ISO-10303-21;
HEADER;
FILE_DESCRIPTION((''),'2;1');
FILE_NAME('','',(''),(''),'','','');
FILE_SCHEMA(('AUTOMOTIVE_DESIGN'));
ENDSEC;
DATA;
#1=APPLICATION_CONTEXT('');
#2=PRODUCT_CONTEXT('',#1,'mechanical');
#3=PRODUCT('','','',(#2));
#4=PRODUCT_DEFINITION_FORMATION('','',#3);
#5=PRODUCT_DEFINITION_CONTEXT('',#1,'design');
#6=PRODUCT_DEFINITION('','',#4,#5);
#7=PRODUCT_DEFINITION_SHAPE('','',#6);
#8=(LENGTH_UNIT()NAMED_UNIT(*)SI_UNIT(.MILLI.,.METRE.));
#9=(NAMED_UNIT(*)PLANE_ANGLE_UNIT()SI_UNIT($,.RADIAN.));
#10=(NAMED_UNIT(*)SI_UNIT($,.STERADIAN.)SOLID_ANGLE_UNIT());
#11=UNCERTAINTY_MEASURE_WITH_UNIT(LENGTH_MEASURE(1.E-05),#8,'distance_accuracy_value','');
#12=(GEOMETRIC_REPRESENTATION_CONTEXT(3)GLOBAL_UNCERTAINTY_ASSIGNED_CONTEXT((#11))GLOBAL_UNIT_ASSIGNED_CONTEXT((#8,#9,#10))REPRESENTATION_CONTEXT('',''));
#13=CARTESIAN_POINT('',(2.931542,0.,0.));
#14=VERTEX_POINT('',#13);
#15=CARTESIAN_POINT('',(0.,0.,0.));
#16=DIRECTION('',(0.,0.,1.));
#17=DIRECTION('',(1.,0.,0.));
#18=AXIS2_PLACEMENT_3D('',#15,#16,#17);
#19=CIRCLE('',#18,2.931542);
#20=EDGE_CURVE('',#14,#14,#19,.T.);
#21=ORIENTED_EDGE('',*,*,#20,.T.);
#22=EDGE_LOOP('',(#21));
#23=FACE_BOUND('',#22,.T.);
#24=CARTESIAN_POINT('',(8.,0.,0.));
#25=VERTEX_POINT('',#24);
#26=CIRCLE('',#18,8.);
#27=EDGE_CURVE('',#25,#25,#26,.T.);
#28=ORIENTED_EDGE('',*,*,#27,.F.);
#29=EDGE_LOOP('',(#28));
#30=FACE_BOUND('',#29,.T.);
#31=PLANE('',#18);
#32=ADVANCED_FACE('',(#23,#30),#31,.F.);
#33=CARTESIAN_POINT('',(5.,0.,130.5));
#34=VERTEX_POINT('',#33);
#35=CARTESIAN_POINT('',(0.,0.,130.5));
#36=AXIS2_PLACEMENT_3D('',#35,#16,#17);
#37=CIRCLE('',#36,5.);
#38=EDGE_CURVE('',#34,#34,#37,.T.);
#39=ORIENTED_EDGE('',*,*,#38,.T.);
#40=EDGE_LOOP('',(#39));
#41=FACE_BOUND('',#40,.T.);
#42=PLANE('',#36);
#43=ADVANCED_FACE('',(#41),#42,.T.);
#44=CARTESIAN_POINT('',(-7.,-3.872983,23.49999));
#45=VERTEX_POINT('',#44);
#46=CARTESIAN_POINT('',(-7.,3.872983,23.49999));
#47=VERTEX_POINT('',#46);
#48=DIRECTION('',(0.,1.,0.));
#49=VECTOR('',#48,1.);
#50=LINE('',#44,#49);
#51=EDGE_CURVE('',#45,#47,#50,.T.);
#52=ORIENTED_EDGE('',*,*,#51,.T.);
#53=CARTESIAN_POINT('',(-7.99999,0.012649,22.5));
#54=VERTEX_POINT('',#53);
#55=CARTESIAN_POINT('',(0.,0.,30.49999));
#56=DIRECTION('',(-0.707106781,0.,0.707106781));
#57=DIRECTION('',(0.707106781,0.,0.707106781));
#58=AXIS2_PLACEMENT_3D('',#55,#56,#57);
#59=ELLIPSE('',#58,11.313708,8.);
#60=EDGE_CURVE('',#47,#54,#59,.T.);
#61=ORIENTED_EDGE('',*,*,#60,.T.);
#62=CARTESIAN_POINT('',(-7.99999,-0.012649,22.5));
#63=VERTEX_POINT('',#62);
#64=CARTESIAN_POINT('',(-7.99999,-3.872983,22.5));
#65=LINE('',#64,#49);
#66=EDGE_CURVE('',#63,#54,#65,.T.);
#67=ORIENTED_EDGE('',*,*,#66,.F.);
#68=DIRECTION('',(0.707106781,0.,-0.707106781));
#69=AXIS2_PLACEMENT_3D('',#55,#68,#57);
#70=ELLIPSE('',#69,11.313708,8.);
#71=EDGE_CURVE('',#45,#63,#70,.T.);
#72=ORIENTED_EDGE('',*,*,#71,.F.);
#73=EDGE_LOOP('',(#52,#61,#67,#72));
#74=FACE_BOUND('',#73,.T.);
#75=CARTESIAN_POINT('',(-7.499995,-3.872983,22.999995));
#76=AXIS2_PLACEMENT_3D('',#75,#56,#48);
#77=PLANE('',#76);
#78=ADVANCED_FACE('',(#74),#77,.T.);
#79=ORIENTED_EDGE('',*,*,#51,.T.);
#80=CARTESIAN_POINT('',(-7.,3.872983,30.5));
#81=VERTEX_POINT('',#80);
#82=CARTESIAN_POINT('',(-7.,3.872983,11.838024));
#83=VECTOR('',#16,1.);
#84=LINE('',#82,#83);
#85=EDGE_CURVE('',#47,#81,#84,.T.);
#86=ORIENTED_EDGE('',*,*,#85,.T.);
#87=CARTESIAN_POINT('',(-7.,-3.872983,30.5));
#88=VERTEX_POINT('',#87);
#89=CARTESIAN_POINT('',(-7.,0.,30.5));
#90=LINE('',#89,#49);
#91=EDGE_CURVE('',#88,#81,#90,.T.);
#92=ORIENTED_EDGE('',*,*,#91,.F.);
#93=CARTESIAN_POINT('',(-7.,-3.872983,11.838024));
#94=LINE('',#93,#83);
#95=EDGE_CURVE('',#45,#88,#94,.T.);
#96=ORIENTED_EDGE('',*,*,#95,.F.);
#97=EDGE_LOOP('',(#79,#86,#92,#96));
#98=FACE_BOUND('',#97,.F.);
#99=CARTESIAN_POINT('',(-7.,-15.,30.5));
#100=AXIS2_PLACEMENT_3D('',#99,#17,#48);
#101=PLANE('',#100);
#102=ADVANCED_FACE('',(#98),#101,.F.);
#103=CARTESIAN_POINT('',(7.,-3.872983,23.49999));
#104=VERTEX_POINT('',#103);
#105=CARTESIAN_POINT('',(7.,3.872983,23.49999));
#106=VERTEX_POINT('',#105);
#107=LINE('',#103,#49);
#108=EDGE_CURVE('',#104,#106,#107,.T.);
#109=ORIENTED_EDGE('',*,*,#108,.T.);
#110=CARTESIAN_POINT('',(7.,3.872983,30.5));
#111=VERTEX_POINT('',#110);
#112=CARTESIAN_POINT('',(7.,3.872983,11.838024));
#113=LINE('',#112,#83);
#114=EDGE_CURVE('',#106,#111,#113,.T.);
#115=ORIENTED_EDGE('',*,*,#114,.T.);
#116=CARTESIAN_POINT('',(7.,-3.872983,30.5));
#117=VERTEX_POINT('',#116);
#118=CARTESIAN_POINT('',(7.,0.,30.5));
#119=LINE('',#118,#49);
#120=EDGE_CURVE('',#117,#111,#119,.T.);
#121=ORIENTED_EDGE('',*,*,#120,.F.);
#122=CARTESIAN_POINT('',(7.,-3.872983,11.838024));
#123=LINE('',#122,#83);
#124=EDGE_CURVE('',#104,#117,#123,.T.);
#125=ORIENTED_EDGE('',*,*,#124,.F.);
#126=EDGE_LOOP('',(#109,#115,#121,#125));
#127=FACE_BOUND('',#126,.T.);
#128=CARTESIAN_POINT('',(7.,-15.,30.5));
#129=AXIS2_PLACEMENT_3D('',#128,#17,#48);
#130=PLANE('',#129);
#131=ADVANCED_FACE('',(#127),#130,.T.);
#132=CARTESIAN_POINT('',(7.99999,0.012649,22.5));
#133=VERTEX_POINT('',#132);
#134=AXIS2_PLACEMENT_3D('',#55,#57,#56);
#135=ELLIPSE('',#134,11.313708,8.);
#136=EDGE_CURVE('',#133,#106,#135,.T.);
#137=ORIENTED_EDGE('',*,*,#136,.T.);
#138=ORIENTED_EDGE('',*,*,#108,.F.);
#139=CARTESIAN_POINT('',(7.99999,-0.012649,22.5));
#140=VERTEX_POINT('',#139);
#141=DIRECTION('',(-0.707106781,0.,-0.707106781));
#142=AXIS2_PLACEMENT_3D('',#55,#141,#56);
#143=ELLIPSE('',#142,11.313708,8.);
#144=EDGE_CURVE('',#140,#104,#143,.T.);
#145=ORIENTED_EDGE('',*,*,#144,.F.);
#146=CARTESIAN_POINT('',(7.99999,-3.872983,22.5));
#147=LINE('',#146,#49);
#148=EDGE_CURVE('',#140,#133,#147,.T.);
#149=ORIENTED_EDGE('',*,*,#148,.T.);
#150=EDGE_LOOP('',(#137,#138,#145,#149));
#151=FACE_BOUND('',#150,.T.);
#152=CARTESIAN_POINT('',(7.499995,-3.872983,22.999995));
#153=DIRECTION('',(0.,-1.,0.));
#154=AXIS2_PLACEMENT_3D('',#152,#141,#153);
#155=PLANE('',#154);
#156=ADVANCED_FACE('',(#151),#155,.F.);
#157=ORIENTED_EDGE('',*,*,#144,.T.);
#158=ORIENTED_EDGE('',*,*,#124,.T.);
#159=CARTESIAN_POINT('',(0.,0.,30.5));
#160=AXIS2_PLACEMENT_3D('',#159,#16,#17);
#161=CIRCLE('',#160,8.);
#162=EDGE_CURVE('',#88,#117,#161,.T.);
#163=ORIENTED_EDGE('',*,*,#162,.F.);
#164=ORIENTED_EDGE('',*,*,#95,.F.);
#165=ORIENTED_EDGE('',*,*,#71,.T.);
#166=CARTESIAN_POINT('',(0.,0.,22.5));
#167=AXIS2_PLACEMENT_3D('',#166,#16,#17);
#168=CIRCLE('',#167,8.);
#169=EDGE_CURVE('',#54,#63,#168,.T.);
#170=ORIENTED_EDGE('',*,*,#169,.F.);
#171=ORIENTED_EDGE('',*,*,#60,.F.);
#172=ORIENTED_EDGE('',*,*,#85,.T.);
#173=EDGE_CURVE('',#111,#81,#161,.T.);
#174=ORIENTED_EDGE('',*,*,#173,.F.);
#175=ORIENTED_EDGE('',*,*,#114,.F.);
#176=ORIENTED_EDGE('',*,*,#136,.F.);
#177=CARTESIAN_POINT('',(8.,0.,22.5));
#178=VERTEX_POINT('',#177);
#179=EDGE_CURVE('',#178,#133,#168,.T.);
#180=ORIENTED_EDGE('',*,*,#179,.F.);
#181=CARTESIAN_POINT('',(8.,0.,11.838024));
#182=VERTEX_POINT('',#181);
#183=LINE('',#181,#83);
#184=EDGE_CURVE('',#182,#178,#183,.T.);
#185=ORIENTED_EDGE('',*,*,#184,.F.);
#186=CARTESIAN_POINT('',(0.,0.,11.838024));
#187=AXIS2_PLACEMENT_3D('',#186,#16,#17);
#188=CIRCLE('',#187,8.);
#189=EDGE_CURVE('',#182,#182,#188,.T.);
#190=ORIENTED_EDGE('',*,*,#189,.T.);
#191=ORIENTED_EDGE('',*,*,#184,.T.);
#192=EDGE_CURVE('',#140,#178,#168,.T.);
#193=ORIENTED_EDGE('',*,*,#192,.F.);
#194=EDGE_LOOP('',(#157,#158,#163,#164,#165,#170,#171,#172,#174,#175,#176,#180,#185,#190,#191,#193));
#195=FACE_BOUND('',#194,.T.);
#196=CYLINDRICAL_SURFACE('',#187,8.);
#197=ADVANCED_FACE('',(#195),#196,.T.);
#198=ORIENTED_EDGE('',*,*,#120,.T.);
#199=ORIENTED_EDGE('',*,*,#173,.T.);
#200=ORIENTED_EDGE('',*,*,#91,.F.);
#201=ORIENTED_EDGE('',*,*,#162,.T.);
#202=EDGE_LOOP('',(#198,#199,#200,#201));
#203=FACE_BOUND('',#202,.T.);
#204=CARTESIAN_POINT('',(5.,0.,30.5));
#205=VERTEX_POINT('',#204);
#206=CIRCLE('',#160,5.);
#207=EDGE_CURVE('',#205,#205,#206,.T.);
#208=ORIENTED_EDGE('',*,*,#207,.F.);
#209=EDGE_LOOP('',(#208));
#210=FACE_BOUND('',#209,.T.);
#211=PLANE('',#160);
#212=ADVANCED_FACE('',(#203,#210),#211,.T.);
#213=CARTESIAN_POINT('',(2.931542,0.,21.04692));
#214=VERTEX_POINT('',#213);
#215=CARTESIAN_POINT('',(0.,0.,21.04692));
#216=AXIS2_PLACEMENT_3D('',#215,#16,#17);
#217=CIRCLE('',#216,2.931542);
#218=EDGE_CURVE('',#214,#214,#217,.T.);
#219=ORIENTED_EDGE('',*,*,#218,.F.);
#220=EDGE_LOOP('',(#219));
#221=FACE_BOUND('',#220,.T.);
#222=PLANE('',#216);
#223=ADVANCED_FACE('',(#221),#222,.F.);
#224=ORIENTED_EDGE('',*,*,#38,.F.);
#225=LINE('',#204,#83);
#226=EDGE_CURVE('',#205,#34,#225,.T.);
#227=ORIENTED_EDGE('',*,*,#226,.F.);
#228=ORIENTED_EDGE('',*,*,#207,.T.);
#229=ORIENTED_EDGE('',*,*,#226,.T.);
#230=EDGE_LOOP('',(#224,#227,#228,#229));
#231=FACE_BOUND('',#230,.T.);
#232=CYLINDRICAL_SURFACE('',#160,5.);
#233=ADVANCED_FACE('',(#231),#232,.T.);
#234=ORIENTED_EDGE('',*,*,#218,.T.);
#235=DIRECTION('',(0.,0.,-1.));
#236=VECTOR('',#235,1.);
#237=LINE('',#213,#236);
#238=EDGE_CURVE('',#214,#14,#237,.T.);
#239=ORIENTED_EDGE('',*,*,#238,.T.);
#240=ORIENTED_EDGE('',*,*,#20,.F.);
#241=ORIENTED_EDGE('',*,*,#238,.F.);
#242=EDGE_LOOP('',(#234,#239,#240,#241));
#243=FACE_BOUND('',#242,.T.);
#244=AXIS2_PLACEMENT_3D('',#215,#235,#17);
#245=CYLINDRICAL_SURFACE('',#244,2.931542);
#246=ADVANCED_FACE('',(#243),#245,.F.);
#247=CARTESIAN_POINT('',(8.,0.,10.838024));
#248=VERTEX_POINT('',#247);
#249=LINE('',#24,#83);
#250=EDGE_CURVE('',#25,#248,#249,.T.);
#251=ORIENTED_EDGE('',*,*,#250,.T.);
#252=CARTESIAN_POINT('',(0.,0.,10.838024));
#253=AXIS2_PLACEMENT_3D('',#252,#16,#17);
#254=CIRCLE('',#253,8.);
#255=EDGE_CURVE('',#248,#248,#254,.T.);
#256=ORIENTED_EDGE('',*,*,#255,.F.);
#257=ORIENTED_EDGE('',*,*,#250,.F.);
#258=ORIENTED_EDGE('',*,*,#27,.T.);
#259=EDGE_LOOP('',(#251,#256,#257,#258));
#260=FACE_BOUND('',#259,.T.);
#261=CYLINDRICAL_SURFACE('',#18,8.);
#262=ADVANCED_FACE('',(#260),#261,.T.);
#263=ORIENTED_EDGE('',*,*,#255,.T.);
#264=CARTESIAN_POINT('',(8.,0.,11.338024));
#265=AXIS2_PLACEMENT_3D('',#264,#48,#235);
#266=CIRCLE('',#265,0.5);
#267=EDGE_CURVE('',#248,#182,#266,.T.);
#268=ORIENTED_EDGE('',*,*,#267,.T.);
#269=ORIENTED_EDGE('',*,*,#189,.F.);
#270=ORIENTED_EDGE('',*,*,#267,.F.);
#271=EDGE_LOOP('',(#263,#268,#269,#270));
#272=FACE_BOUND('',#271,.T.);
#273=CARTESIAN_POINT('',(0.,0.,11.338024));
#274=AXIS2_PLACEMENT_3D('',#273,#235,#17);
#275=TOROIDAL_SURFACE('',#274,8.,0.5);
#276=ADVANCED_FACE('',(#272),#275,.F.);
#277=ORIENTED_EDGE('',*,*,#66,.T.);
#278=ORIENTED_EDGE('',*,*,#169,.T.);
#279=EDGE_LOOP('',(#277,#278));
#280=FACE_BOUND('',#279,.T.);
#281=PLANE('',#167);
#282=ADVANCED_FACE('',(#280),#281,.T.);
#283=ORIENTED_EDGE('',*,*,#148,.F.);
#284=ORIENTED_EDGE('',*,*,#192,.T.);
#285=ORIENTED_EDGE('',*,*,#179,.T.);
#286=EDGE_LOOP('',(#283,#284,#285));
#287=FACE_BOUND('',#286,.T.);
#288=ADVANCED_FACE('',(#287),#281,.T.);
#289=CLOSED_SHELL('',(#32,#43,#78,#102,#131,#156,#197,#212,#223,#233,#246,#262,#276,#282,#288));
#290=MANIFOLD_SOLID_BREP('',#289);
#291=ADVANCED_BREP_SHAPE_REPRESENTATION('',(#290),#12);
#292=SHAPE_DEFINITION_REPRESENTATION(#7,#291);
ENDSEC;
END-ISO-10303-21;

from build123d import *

# Parameters (mm, degrees)
F2_W     = 19.6017324924
F2_H     = 37.1457748115
F2_W_2   = 14
F2_H_2   = 30
F3_DEPTH = 8
F4_SIZE  = 0.99999


# Not quite as in the source:
# - a fillet or chamfer is up to 0.001 mm smaller than in the source, because OpenCascade refuses the exact size


with BuildPart() as f1:
    # F0 (on Front) → F1 (revolve)
    with BuildSketch(Plane.XZ):
        with BuildLine():
            Line((2.9315422289, 21.0469197482), (2.9315422289, 0))
            Line((2.9315422289, 0), (8, 0))
            Line((8, 0), (8, 10.8380244002))
            ThreePointArc((8, 10.8380244002), (7.5, 11.3380244002), (8, 11.8380244002))
            Line((8, 11.8380244002), (8, 30.5))
            Line((8, 30.5), (5, 30.5))
            Line((5, 30.5), (5, 130.5))
            Line((5, 130.5), (0, 130.5))
            Line((0, 130.5), (0, 30.5))
            Line((0, 30.5), (0, 21.0469197482))
            Line((0, 21.0469197482), (2.9315422289, 21.0469197482))
        make_face()
    revolve(axis=Axis((0, 0, 80.5), (0, 0, 1)))

    # F2 (on face) → F3 (cut)
    with BuildSketch(Plane.XY.offset(30.5)):
        Rectangle(F2_W, F2_H)
        Rectangle(F2_W_2, F2_H_2, mode=Mode.SUBTRACT)
    extrude(amount=-F3_DEPTH, mode=Mode.SUBTRACT)

    # F4 (size 1 in the source; OpenCascade refuses exactly that, so slightly less here)
    f4_edges = [f1.edges().sort_by_distance(p)[0] for p in [
        (-7, 0, 22.5),
        (7, 0, 22.5),
    ]]
    chamfer(f4_edges, length=F4_SIZE)


solid = f1.part
